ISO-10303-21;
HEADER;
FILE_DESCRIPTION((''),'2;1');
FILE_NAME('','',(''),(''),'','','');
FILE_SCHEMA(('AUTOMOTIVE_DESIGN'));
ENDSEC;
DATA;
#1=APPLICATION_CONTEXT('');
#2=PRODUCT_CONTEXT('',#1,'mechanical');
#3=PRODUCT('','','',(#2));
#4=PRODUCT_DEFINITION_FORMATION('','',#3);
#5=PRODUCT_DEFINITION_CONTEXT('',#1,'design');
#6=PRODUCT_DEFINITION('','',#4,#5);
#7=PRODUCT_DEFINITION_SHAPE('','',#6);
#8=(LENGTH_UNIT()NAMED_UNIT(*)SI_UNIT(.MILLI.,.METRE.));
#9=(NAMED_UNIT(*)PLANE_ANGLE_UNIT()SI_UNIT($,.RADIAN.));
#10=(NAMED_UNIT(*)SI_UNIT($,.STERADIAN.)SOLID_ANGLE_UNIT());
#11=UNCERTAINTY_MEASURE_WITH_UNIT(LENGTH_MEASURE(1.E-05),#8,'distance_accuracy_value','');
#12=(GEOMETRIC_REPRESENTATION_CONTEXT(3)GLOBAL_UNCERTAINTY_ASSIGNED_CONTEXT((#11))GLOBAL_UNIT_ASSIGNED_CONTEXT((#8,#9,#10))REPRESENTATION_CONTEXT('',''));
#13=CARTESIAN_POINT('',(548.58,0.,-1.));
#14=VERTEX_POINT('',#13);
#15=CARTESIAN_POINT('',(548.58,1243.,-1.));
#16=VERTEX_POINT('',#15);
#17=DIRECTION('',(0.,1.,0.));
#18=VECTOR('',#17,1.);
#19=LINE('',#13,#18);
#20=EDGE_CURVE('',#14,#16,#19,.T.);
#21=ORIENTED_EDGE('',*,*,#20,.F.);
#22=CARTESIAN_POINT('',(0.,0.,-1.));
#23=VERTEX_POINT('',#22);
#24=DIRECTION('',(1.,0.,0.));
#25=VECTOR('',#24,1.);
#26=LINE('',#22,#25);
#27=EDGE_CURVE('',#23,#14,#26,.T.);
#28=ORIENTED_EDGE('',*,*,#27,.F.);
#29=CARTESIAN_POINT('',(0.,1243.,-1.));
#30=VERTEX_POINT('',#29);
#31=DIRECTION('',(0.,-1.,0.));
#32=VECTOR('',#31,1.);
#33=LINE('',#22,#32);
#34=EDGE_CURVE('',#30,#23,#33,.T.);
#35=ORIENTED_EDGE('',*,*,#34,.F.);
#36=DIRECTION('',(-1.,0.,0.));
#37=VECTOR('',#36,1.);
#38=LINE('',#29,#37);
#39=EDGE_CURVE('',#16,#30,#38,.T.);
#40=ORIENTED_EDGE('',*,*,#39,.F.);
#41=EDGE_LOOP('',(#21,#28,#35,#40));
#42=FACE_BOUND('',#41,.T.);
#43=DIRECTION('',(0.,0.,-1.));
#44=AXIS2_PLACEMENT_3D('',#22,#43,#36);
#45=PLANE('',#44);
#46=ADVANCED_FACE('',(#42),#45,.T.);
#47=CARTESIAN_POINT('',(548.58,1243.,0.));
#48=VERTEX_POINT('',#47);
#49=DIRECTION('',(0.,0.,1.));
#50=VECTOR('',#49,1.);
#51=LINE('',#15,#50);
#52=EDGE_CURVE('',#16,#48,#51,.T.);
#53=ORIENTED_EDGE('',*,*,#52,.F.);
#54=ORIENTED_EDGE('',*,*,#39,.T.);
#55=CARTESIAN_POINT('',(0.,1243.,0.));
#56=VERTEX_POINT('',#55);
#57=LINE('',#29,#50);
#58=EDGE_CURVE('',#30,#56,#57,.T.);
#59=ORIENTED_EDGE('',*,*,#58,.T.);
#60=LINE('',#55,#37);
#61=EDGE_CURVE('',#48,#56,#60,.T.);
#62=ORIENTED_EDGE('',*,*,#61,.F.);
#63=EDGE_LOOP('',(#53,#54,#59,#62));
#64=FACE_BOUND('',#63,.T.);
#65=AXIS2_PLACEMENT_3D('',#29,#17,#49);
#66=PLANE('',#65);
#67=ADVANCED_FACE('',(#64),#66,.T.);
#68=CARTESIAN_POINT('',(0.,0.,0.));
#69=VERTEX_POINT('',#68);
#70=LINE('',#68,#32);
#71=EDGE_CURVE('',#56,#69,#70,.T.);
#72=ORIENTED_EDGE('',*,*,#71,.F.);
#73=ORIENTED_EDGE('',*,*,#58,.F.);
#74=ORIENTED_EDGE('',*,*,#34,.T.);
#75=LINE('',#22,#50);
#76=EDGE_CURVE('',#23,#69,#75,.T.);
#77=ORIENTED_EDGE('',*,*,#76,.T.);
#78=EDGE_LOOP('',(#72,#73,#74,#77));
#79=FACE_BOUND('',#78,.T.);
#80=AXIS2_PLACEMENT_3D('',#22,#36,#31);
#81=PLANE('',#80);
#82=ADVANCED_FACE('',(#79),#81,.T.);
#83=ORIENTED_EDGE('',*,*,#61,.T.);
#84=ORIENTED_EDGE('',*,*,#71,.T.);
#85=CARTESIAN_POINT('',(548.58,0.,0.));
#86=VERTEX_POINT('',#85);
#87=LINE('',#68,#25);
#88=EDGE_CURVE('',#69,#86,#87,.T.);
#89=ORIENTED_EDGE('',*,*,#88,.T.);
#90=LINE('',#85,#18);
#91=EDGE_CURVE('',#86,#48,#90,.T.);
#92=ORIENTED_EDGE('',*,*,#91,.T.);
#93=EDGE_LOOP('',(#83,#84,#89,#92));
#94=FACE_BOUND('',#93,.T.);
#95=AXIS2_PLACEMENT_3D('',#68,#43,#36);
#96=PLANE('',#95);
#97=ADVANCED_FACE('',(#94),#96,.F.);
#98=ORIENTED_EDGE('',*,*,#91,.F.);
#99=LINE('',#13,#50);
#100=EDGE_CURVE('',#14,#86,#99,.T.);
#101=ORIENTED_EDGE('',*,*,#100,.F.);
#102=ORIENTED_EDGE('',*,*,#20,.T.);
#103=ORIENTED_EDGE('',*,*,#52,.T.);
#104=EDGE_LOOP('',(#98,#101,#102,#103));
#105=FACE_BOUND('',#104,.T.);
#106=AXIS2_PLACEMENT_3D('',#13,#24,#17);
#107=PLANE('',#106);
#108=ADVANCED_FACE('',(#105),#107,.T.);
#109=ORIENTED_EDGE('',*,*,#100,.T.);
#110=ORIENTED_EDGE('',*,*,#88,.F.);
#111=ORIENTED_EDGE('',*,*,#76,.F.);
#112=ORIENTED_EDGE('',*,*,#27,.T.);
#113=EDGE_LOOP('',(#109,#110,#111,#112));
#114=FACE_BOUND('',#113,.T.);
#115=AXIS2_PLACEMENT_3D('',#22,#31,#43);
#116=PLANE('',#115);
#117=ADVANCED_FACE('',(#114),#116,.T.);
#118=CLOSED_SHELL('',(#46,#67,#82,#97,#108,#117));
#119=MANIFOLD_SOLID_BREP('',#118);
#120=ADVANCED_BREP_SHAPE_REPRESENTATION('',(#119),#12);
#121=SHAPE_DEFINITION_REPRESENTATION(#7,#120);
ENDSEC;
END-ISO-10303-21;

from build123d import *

# Parameters (mm, degrees)
SKETCH1_W          = 548.58
SKETCH1_H          = 1243
BASE_FLANGE1_DEPTH = 1


# Sheet-metal steps are written as plain solids
with BuildPart() as part:
    # Sketch1 → Base-Flange1 (new body)
    with BuildSketch(Plane.XY):
        with Locations((274.29, 621.5)):
            Rectangle(SKETCH1_W, SKETCH1_H)
    extrude(amount=-BASE_FLANGE1_DEPTH)


solid = part.part
